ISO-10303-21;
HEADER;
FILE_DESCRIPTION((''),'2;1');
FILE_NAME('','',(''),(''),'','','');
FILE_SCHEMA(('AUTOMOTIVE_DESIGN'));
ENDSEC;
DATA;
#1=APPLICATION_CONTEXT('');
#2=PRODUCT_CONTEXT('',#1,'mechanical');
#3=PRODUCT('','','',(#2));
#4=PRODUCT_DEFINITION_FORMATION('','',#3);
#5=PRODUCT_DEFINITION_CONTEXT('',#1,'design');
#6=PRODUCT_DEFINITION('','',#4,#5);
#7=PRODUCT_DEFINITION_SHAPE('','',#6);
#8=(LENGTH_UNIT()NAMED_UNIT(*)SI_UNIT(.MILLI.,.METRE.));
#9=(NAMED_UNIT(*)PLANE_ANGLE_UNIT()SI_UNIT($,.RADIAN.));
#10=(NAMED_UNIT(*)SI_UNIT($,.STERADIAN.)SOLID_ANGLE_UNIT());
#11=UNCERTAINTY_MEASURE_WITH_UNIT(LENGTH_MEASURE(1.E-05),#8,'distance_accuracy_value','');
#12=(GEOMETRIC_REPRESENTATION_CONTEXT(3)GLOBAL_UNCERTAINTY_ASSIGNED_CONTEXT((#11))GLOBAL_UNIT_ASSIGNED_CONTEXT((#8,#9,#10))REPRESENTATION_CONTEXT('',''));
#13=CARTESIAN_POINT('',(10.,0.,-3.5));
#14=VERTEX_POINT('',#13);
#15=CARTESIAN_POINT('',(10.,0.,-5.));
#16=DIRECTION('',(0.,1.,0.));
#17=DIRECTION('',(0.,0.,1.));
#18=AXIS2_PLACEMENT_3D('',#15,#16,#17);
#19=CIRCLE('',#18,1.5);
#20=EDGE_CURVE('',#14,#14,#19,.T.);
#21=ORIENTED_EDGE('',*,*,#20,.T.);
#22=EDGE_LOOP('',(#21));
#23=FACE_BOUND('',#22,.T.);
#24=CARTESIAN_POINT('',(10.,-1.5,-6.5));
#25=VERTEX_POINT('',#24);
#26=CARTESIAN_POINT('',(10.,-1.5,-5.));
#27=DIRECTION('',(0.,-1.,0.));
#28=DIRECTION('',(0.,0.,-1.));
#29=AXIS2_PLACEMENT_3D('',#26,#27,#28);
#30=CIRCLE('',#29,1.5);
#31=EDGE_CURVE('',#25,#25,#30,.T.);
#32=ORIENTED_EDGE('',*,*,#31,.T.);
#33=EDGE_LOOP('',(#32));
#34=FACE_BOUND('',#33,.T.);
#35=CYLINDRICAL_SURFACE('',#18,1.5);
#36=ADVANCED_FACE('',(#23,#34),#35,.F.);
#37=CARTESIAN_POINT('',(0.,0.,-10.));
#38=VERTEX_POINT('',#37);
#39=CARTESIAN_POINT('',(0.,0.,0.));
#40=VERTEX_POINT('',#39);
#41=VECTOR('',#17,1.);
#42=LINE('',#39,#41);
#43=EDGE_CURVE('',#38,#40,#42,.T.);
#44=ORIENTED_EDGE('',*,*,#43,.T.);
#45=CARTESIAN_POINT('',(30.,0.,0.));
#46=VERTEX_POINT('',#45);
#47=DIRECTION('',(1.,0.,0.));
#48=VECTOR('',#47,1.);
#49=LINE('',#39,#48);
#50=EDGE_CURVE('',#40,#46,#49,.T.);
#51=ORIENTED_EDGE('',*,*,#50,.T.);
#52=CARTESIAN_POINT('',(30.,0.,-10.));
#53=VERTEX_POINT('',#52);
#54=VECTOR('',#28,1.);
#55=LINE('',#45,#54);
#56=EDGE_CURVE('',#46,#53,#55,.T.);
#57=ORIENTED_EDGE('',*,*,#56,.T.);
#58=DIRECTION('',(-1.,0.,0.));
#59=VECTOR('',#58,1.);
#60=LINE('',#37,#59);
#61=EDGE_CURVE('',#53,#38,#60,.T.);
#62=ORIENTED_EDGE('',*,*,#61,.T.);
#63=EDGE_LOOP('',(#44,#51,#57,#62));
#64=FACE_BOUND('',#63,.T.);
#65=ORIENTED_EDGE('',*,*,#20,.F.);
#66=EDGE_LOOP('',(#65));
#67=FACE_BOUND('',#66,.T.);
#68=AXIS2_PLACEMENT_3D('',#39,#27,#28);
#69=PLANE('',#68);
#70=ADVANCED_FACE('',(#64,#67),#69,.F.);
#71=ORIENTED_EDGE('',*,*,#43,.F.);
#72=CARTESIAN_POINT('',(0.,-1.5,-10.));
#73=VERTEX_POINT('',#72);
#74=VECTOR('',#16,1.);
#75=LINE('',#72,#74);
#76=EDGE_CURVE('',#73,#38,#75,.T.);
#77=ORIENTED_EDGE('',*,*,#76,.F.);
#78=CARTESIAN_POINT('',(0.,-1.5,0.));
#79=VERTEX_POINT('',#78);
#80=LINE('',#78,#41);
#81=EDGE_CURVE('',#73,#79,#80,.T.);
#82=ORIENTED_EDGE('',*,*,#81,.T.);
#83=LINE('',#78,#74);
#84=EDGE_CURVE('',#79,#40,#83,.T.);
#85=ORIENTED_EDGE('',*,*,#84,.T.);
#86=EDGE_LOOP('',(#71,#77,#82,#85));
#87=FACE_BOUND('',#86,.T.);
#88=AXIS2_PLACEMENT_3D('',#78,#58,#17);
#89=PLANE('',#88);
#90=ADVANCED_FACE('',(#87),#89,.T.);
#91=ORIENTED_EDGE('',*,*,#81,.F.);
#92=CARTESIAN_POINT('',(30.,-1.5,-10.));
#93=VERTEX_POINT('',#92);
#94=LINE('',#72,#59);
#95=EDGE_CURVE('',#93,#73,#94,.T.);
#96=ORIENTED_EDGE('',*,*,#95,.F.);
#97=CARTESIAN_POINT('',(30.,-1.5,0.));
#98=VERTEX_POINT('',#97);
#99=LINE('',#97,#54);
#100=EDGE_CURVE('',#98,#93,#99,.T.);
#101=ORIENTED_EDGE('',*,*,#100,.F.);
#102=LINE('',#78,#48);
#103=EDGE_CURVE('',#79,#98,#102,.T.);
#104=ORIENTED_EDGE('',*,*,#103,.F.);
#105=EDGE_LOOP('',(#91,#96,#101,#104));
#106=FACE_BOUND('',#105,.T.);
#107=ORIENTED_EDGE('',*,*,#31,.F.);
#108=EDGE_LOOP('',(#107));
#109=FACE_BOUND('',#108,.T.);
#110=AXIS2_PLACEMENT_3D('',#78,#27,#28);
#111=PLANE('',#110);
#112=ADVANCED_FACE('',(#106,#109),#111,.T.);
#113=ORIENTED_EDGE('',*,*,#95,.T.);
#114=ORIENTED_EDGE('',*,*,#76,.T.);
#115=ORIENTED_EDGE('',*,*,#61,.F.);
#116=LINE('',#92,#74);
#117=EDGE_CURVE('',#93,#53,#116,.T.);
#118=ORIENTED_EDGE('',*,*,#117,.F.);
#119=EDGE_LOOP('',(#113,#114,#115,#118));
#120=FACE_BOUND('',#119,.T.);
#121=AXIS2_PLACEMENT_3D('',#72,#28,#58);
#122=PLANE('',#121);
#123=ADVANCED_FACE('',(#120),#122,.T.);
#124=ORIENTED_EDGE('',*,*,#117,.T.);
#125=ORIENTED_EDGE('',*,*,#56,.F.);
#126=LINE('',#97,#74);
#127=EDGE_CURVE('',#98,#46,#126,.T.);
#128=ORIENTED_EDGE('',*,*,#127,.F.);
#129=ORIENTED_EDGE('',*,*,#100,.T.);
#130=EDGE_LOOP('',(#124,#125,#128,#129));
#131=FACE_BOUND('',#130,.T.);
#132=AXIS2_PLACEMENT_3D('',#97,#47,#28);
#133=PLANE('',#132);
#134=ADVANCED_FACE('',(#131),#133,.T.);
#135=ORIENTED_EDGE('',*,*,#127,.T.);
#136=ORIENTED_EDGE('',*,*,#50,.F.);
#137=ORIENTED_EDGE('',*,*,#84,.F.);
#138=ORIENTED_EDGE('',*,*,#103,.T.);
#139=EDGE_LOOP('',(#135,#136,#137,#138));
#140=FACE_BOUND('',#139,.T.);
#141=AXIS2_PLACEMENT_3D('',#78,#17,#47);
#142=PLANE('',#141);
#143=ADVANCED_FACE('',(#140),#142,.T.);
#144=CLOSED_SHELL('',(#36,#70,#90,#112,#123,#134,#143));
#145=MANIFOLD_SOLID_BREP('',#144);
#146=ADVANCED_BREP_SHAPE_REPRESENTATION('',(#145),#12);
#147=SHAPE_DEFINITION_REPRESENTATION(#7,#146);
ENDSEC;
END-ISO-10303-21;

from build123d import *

# Parameters (mm, degrees)
SKETCH1_W                   = 30
SKETCH1_H                   = 10
BASE_FLANGE1_DEPTH          = 1.5
F_3_0MM_PRESS_DOWEL_HOLE1_D = 3


# Sheet-metal steps are written as plain solids
with BuildPart() as part:
    # Sketch1 → Base-Flange1 (new body)
    with BuildSketch(Plane(origin=(0, 0, 0), x_dir=(1, 0, 0), z_dir=(0, 1, 0))):
        with Locations((15, 5)):
            Rectangle(SKETCH1_W, SKETCH1_H)
    extrude(amount=-BASE_FLANGE1_DEPTH)

    # Ø3.0mm Press Dowel Hole1 (through all)
    with Locations(Plane(origin=(0, 0, 0), x_dir=(1, 0, 0), z_dir=(0, 1, 0))):
        with Locations((10, 5)):
            Hole(F_3_0MM_PRESS_DOWEL_HOLE1_D / 2)


solid = part.part
